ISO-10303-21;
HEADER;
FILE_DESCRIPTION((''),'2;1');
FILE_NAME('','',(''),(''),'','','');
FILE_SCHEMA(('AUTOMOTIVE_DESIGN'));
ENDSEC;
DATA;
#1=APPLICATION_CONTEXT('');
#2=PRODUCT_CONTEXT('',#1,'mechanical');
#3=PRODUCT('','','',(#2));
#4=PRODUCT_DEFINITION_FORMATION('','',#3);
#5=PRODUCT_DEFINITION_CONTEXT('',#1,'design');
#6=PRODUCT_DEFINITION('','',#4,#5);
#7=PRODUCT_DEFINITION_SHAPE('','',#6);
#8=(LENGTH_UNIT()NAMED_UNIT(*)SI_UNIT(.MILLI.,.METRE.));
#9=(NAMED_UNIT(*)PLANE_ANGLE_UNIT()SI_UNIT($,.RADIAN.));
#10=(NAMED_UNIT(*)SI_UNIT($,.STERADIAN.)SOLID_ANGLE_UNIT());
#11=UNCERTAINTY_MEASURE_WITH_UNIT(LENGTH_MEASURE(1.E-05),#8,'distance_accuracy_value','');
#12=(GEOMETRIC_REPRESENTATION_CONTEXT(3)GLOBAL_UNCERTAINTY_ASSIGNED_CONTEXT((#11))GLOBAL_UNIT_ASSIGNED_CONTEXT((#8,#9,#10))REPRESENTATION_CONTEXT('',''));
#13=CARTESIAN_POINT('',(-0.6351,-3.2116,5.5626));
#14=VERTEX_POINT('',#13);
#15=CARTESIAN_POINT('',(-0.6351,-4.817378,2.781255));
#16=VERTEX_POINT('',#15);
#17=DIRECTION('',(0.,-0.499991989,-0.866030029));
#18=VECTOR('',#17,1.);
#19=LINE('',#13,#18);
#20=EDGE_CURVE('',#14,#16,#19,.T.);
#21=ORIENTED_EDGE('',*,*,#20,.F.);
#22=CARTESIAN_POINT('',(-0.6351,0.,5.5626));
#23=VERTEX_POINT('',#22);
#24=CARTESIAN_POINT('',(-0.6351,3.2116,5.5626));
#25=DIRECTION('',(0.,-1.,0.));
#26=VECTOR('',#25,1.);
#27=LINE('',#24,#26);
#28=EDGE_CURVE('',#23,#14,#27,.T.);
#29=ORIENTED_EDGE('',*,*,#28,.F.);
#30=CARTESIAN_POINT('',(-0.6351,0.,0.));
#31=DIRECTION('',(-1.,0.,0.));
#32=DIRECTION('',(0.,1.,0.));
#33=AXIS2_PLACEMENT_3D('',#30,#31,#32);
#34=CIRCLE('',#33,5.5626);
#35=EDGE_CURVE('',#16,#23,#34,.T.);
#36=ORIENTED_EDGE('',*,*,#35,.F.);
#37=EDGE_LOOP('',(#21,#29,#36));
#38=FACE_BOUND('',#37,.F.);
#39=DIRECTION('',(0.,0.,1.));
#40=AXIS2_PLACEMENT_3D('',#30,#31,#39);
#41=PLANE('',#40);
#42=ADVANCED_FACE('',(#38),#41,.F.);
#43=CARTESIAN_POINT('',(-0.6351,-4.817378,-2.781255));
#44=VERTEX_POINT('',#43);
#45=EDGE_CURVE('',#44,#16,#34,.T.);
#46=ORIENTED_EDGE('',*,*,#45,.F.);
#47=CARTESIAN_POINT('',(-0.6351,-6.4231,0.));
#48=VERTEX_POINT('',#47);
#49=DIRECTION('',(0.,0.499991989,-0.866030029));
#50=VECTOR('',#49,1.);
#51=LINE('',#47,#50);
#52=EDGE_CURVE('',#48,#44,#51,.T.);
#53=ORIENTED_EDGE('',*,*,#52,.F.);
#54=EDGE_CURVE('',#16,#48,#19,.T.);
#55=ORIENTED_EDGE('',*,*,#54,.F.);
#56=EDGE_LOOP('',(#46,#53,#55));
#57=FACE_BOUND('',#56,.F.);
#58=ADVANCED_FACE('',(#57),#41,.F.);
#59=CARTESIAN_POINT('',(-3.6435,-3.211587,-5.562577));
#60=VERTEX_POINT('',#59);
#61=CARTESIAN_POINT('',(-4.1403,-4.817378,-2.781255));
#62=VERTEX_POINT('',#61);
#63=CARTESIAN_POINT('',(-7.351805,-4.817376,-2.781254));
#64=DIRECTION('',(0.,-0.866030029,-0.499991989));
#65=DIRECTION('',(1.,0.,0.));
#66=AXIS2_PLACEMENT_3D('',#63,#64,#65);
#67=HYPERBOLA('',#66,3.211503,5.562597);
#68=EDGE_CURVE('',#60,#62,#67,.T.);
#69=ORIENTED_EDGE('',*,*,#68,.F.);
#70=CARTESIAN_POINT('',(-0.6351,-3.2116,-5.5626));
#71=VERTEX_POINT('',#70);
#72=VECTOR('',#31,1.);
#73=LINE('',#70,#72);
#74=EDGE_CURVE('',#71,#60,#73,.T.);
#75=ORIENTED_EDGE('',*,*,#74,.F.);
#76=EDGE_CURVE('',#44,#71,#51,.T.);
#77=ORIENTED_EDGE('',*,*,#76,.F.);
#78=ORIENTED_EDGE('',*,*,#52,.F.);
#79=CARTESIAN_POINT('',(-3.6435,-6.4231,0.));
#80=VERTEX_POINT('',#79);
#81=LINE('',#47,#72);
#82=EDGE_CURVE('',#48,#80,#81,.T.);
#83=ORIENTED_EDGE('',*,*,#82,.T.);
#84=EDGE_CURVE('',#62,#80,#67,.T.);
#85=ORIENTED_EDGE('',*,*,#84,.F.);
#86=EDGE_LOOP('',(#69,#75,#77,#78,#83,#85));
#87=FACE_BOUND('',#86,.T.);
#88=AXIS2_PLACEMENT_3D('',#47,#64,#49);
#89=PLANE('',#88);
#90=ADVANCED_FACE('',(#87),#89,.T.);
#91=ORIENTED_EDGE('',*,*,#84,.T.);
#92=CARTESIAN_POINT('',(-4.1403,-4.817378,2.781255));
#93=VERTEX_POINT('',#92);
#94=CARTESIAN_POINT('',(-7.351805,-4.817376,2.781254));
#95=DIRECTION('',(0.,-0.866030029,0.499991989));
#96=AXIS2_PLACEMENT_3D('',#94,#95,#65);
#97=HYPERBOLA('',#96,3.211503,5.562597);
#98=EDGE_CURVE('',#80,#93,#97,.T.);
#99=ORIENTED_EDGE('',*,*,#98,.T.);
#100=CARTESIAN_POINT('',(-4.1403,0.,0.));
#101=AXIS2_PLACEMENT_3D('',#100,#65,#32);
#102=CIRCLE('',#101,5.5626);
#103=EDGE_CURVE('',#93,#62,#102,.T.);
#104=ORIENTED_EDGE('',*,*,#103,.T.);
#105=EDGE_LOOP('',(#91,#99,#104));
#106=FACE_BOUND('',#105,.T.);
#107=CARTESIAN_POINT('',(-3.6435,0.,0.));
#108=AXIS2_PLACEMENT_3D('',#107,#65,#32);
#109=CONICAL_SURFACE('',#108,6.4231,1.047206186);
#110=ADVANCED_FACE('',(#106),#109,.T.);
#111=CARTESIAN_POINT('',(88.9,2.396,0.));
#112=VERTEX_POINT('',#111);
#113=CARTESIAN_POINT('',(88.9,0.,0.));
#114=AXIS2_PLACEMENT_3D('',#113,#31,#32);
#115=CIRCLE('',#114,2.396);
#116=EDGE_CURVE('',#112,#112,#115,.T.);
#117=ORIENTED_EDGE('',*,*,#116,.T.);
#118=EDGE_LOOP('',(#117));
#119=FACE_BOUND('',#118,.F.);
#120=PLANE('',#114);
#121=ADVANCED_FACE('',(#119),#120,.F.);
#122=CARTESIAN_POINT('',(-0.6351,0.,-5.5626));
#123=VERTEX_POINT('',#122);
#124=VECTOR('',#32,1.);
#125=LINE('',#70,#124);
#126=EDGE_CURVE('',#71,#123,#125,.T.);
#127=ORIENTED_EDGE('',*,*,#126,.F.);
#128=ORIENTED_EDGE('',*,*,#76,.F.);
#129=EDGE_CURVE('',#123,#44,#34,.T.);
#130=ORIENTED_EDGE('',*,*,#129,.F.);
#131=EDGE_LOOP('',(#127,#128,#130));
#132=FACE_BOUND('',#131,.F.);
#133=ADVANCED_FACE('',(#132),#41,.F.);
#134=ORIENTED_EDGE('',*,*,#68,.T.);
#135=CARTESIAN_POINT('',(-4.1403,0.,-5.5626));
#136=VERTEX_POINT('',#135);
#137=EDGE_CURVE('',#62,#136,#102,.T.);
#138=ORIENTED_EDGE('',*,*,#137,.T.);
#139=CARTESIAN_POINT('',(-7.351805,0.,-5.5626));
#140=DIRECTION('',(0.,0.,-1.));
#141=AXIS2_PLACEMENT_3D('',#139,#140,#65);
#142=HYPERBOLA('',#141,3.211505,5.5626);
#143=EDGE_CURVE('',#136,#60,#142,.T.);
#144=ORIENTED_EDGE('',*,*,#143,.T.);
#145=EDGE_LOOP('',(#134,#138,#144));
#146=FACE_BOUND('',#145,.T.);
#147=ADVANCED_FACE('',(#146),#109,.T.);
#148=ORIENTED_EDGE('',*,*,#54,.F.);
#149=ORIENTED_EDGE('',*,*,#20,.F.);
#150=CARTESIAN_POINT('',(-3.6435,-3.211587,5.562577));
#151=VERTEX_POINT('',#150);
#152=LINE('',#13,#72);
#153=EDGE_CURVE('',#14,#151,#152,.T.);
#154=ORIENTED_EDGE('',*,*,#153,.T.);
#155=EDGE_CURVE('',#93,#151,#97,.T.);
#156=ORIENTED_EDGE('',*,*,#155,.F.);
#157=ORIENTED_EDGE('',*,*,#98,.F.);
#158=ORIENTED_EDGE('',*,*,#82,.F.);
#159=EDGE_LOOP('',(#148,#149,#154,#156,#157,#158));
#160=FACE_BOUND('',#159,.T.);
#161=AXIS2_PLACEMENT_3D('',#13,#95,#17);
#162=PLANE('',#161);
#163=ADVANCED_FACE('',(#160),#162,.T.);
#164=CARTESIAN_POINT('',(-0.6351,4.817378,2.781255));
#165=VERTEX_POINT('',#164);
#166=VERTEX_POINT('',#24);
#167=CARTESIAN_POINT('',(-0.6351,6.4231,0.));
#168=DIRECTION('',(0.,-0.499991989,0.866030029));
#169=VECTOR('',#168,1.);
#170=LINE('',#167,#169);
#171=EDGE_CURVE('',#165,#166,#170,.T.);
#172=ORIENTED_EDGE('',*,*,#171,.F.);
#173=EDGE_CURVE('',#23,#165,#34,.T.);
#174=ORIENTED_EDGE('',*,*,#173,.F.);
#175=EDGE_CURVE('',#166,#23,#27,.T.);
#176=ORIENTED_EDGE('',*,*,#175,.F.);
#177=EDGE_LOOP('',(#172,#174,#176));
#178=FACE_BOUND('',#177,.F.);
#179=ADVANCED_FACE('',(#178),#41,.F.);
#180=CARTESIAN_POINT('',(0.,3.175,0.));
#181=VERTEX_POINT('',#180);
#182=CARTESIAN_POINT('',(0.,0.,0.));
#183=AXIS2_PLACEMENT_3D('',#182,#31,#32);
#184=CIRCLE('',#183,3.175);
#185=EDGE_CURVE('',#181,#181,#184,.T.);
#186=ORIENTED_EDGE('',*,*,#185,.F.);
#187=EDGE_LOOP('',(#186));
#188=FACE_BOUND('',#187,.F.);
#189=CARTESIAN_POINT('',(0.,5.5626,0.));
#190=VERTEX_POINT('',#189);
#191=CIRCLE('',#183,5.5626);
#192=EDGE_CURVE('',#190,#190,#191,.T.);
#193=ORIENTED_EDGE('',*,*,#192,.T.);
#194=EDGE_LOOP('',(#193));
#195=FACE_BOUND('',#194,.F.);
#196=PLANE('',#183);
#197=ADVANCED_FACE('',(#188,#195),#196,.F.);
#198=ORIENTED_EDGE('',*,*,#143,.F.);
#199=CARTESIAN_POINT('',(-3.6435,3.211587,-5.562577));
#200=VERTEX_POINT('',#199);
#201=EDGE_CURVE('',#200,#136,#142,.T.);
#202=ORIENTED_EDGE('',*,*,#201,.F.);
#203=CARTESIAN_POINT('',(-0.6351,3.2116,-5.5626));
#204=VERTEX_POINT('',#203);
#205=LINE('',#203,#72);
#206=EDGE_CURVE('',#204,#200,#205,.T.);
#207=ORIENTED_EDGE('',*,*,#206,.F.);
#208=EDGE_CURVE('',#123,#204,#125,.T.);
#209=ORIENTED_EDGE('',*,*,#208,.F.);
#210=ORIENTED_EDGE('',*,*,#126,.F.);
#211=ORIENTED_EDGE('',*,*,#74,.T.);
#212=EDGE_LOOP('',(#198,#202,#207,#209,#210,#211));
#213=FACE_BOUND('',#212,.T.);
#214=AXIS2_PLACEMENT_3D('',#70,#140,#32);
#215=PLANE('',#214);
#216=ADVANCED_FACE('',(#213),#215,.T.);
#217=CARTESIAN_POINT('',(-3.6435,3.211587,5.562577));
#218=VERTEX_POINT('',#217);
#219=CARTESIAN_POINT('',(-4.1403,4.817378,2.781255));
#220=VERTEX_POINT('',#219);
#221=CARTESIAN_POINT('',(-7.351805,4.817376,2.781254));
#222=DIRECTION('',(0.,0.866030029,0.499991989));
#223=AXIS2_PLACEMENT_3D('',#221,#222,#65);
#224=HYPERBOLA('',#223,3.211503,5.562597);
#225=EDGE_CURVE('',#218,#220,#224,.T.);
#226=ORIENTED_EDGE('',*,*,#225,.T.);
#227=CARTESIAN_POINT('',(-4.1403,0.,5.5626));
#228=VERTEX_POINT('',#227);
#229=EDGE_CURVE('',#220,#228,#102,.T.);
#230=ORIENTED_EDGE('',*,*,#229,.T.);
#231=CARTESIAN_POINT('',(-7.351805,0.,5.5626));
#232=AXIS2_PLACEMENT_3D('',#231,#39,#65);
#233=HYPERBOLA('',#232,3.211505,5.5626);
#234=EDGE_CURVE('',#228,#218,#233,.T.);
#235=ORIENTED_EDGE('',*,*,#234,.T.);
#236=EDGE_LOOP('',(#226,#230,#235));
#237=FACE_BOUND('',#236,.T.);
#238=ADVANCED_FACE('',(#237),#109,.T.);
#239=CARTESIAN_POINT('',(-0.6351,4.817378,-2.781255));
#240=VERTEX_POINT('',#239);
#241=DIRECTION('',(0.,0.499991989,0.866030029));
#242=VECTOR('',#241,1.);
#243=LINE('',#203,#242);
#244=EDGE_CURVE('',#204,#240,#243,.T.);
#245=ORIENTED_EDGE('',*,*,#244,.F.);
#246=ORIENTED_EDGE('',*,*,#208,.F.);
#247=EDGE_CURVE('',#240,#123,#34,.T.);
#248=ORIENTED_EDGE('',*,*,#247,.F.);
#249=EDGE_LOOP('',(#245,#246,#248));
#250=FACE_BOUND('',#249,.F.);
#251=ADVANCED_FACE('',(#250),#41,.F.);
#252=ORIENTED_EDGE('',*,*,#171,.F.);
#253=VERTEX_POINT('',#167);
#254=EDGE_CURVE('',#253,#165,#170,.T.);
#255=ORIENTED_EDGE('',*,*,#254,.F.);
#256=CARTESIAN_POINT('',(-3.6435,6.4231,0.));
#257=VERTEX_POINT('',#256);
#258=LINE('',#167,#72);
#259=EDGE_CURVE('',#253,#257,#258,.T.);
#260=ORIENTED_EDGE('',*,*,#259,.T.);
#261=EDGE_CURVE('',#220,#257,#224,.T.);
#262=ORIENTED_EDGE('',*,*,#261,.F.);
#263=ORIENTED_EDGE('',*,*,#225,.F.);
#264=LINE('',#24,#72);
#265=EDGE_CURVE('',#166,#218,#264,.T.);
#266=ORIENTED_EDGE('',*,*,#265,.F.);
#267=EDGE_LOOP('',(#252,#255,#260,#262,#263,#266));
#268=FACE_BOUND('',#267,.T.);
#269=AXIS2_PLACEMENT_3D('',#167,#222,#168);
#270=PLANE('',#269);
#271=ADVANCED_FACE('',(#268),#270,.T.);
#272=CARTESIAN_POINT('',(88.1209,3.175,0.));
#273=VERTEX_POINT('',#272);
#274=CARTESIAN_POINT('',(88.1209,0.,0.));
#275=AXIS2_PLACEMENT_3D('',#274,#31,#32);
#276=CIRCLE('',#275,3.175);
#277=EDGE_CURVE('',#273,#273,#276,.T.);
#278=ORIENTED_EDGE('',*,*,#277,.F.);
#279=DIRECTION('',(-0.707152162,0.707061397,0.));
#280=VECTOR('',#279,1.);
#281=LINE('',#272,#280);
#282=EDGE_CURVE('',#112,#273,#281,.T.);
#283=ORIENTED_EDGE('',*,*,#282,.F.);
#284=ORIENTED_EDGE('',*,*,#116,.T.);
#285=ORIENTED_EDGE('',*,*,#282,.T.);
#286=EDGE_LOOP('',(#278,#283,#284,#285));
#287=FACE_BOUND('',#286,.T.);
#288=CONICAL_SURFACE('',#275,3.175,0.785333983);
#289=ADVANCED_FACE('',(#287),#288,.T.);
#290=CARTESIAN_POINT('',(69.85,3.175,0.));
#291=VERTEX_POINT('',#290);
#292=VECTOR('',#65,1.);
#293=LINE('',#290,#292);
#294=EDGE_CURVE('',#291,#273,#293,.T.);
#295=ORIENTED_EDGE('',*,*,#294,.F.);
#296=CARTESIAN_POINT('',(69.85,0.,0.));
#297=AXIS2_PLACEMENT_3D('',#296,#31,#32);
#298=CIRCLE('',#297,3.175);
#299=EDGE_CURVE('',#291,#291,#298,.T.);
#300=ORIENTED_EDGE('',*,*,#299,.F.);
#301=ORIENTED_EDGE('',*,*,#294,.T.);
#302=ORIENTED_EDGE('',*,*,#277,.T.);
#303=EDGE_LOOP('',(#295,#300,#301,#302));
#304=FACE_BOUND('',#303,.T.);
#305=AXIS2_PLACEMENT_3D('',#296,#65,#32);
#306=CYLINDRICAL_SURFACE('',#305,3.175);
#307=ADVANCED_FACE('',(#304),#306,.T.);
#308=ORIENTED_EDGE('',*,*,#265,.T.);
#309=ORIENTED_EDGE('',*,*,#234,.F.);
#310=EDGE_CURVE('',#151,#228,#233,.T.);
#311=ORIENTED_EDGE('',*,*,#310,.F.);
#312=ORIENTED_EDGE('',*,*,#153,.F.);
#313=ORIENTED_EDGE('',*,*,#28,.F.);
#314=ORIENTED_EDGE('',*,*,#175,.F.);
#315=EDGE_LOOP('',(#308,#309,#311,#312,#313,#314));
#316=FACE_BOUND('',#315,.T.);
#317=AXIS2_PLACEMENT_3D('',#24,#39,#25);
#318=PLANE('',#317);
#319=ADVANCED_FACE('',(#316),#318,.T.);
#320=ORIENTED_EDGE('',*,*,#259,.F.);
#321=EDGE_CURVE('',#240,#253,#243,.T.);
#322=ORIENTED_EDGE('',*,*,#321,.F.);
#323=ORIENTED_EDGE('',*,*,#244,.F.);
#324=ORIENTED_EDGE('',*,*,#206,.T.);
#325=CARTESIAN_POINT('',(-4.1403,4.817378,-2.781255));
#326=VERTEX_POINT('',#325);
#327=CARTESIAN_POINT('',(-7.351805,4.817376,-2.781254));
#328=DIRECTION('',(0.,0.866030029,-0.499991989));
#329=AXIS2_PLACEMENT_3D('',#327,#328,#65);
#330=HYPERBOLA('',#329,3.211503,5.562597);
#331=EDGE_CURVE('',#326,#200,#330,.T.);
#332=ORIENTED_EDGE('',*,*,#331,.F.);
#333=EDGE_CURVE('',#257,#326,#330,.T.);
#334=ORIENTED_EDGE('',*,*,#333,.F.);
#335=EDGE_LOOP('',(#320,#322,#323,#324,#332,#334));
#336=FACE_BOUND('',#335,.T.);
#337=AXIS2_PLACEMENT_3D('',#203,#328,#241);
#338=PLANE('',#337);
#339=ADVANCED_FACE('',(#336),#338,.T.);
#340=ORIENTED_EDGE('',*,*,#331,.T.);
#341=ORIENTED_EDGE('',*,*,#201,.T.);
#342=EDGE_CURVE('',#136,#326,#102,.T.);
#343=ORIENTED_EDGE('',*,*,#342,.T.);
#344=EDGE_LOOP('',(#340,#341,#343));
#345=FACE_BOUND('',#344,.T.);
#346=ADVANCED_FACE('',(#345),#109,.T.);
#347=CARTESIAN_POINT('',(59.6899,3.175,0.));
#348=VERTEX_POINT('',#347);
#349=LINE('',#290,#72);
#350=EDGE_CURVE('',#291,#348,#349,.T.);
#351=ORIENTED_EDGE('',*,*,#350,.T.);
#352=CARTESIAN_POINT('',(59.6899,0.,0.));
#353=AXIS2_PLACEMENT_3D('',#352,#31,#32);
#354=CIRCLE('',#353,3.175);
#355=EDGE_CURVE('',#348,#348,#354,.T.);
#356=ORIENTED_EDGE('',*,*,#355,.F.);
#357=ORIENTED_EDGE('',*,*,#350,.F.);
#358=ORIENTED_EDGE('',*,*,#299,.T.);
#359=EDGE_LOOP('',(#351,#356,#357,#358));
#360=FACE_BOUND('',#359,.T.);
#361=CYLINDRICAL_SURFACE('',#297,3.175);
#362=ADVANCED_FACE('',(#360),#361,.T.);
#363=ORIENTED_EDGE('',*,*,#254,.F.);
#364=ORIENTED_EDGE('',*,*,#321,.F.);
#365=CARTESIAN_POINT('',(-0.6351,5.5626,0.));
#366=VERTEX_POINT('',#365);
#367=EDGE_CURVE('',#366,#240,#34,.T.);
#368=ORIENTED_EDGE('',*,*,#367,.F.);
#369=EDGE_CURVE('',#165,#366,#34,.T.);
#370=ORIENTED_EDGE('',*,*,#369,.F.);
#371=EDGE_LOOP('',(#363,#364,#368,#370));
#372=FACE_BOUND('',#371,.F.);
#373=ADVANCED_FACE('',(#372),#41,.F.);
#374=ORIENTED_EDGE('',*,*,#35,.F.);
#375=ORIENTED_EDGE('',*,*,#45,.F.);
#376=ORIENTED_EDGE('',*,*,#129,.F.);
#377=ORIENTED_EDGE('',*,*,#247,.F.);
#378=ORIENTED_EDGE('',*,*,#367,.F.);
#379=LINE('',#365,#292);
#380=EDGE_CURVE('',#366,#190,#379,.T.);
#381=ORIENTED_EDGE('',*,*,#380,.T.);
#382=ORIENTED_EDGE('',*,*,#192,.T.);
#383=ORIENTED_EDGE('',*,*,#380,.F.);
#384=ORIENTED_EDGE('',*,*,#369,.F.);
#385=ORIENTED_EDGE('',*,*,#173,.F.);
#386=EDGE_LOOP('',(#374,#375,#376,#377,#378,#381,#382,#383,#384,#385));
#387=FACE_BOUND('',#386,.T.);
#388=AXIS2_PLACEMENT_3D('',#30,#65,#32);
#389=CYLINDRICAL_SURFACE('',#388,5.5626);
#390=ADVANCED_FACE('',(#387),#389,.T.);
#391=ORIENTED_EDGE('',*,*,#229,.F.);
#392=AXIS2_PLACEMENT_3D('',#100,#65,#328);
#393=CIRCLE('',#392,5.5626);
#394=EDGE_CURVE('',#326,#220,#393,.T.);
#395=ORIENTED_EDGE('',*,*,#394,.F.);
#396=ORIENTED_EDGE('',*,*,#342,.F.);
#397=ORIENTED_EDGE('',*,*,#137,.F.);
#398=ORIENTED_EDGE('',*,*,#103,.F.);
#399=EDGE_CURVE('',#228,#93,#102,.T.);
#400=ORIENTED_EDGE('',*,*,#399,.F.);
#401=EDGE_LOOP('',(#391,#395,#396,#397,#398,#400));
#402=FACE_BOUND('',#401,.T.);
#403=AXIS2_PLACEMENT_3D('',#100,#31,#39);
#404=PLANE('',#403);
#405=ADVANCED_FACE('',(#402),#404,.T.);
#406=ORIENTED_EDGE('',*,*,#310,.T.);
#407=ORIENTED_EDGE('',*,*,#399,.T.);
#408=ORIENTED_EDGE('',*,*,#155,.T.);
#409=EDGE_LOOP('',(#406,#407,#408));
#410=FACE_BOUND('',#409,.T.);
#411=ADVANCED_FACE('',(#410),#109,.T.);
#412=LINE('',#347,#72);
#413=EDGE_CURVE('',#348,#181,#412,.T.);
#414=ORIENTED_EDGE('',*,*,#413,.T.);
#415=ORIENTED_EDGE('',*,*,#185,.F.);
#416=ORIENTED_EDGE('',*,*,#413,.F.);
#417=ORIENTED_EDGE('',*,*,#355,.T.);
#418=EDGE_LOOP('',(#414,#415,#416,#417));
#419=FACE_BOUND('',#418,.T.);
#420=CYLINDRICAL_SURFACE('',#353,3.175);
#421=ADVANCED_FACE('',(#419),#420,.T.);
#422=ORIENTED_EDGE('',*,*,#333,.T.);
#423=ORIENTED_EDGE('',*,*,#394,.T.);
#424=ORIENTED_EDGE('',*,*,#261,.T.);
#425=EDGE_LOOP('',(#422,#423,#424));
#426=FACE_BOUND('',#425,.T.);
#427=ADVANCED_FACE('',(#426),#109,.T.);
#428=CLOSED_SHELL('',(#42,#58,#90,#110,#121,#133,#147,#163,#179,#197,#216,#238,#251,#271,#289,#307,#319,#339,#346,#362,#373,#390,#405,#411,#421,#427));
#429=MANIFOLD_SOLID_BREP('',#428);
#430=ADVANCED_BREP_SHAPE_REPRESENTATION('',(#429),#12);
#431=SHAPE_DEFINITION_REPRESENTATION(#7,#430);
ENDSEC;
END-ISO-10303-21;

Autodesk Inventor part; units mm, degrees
ref_plane "YZ Plane" through (0, 0, 0) normal (1, 0, 0) x (0, 1, 0)
ref_plane "XZ Plane" through (0, 0, 0) normal (0, 1, 0) x (-1, 0, 0)
sketch "Sketch1" plane through (0, 0, 0) normal (0, 0, 1) x (1, 0, 0)
  line L0 (0, 5.5626) -> (0, 3.175)
  line L1 (69.85, 3.175) -> (88.9, 3.175)
  line L2 (88.9, 3.175) -> (88.9, 0)
  line L3 (88.9, 0) -> (-0.6351, 0)
  line L4 (-18.5421, 0) -> (106.807, 0) projected
  line L5 (-0.6351, 0) -> (-0.6351, 5.5626)
  line L6 (-0.6351, 5.5626) -> (0, 5.5626)
  line L7 (69.85, 3.175) -> (59.6899, 3.175)
  line L8 (59.6899, 3.175) -> (0, 3.175)
  line L9 (0, -1.1125) -> (0, 6.6751) projected
  dimension "d0" = 88.9
  dimension "d1" = 19.05
  dimension "d2" = 6.35
  dimension "d9" = 0.6351
  dimension "d10" = 11.1252
  dimension "d13" = 10.1601
  dimension "d14" = 6.35
revolve "Body" add sketch "Sketch1" angle 360 about axis through (88.9, 0, 0) along (-1, 0, 0)
sketch "Sketch2" plane through (-0.6351, 0, 0) normal (-1, 0, 0) x (0, 0, 1)
  line L0 (0, 6.4231) -> (5.5626, 3.2116)
  line L1 (5.5626, 3.2116) -> (5.5626, -3.2116)
  line L2 (5.5626, -3.2116) -> (0, -6.4231)
  line L3 (0, -6.4231) -> (-5.5626, -3.2116)
  line L4 (-5.5626, -3.2116) -> (-5.5626, 3.2116)
  line L5 (-5.5626, 3.2116) -> (0, 6.4231)
  point P0 (0, 0)
  point P1 (0, 0)
  dimension "d11" = 11.1252
extrude "Head" add sketch "Sketch2" along normal blind 3.5052
sketch "Sketch4" plane through (0, 0, 0) normal (0, 0, 1) x (1, 0, 0)
  line L0 (-4.1403, 5.5626) -> (-4.1403, 6.4231)
  line L1 (-4.1403, 6.4231) -> (-3.6435, 6.4231)
  line L2 (-3.6435, 6.4231) -> (-4.1403, 5.5626)
  line L3 (-4.8413, 0) -> (0.0659, 0) projected
  line L4 (-0.6351, 6.4231) -> (-4.1403, 6.4231) projected
  line L5 (-4.1403, 3.2116) -> (-4.1403, 6.4231) projected
  dimension "d5" = 30
  dimension "d19" = 11.1252
revolve "Chamfer1" cut sketch "Sketch4" angle 360 about axis through (-10, 0, 0) along (1, 0, 0)
thread "Thread" size "1/4-20 UNC" class "2A" standard "ANSI Unified Screw Threads" length 19.05
chamfer "Chamfer2" distance 0.779 distance2 0.7791 1 edges at (88.9, -3.175, 0) measured on face at (88.9, -0.6107, -0.541)
ref_plane "Work Plane1" through (1.525, 0, 0) normal (0, 0, 1) x (1, 0, 0)
equation "\"d0\" = NLG"
equation "\"d1\" = GEL"
equation "\"d2\" = GD"
equation "\"d10\" = SD2"
equation "\"d14\" = BDM"
equation "\"d11\" = SW"
equation "\"d3\" = KOH - SD"
equation "\"d5\" = ANG1"
equation "\"d19\" = SW0"
equation "\"d15\" = GEL"
equation "\"d6\" = -0.5 * SPD + 0.5 * GD"
equation "\"NLG\" = 88.9"
equation "\"GD\" = 6.35"
equation "\"BDM\" = 6.35"
equation "\"KOH\" = 4.1402"
equation "\"GEL\" = 19.05"
equation "\"SW\" = 11.1252"
equation "\"SW0\" = SW"
equation "\"SPD\" = GD1"
equation "\"SD2\" = SW"
equation "\"SD\" = 0.635"
equation "\"ANG1\" = 30deg"
equation "\"GAL\" = 10.16"
equation "\"GUL\" = 0.77902"
equation "\"RR\" = 0.381"
equation "\"WFT\" = SD"
equation "\"GD1\" = 4.79196"
equation "\"THREADDIA\" = 6.35"
equation "\"SDH\" = SW"
equation "\"SDHG\" = 59.69"
equation "\"TOA\" = 30deg"
equation "\"FAWI\" = 45deg"
equation "\"NND\" = 6.35"
equation "\"E0\" = 12.84961"
properties part number "AS 2465 - 1/4 x 3 1/2  UNC" material "Steel, Mild"
